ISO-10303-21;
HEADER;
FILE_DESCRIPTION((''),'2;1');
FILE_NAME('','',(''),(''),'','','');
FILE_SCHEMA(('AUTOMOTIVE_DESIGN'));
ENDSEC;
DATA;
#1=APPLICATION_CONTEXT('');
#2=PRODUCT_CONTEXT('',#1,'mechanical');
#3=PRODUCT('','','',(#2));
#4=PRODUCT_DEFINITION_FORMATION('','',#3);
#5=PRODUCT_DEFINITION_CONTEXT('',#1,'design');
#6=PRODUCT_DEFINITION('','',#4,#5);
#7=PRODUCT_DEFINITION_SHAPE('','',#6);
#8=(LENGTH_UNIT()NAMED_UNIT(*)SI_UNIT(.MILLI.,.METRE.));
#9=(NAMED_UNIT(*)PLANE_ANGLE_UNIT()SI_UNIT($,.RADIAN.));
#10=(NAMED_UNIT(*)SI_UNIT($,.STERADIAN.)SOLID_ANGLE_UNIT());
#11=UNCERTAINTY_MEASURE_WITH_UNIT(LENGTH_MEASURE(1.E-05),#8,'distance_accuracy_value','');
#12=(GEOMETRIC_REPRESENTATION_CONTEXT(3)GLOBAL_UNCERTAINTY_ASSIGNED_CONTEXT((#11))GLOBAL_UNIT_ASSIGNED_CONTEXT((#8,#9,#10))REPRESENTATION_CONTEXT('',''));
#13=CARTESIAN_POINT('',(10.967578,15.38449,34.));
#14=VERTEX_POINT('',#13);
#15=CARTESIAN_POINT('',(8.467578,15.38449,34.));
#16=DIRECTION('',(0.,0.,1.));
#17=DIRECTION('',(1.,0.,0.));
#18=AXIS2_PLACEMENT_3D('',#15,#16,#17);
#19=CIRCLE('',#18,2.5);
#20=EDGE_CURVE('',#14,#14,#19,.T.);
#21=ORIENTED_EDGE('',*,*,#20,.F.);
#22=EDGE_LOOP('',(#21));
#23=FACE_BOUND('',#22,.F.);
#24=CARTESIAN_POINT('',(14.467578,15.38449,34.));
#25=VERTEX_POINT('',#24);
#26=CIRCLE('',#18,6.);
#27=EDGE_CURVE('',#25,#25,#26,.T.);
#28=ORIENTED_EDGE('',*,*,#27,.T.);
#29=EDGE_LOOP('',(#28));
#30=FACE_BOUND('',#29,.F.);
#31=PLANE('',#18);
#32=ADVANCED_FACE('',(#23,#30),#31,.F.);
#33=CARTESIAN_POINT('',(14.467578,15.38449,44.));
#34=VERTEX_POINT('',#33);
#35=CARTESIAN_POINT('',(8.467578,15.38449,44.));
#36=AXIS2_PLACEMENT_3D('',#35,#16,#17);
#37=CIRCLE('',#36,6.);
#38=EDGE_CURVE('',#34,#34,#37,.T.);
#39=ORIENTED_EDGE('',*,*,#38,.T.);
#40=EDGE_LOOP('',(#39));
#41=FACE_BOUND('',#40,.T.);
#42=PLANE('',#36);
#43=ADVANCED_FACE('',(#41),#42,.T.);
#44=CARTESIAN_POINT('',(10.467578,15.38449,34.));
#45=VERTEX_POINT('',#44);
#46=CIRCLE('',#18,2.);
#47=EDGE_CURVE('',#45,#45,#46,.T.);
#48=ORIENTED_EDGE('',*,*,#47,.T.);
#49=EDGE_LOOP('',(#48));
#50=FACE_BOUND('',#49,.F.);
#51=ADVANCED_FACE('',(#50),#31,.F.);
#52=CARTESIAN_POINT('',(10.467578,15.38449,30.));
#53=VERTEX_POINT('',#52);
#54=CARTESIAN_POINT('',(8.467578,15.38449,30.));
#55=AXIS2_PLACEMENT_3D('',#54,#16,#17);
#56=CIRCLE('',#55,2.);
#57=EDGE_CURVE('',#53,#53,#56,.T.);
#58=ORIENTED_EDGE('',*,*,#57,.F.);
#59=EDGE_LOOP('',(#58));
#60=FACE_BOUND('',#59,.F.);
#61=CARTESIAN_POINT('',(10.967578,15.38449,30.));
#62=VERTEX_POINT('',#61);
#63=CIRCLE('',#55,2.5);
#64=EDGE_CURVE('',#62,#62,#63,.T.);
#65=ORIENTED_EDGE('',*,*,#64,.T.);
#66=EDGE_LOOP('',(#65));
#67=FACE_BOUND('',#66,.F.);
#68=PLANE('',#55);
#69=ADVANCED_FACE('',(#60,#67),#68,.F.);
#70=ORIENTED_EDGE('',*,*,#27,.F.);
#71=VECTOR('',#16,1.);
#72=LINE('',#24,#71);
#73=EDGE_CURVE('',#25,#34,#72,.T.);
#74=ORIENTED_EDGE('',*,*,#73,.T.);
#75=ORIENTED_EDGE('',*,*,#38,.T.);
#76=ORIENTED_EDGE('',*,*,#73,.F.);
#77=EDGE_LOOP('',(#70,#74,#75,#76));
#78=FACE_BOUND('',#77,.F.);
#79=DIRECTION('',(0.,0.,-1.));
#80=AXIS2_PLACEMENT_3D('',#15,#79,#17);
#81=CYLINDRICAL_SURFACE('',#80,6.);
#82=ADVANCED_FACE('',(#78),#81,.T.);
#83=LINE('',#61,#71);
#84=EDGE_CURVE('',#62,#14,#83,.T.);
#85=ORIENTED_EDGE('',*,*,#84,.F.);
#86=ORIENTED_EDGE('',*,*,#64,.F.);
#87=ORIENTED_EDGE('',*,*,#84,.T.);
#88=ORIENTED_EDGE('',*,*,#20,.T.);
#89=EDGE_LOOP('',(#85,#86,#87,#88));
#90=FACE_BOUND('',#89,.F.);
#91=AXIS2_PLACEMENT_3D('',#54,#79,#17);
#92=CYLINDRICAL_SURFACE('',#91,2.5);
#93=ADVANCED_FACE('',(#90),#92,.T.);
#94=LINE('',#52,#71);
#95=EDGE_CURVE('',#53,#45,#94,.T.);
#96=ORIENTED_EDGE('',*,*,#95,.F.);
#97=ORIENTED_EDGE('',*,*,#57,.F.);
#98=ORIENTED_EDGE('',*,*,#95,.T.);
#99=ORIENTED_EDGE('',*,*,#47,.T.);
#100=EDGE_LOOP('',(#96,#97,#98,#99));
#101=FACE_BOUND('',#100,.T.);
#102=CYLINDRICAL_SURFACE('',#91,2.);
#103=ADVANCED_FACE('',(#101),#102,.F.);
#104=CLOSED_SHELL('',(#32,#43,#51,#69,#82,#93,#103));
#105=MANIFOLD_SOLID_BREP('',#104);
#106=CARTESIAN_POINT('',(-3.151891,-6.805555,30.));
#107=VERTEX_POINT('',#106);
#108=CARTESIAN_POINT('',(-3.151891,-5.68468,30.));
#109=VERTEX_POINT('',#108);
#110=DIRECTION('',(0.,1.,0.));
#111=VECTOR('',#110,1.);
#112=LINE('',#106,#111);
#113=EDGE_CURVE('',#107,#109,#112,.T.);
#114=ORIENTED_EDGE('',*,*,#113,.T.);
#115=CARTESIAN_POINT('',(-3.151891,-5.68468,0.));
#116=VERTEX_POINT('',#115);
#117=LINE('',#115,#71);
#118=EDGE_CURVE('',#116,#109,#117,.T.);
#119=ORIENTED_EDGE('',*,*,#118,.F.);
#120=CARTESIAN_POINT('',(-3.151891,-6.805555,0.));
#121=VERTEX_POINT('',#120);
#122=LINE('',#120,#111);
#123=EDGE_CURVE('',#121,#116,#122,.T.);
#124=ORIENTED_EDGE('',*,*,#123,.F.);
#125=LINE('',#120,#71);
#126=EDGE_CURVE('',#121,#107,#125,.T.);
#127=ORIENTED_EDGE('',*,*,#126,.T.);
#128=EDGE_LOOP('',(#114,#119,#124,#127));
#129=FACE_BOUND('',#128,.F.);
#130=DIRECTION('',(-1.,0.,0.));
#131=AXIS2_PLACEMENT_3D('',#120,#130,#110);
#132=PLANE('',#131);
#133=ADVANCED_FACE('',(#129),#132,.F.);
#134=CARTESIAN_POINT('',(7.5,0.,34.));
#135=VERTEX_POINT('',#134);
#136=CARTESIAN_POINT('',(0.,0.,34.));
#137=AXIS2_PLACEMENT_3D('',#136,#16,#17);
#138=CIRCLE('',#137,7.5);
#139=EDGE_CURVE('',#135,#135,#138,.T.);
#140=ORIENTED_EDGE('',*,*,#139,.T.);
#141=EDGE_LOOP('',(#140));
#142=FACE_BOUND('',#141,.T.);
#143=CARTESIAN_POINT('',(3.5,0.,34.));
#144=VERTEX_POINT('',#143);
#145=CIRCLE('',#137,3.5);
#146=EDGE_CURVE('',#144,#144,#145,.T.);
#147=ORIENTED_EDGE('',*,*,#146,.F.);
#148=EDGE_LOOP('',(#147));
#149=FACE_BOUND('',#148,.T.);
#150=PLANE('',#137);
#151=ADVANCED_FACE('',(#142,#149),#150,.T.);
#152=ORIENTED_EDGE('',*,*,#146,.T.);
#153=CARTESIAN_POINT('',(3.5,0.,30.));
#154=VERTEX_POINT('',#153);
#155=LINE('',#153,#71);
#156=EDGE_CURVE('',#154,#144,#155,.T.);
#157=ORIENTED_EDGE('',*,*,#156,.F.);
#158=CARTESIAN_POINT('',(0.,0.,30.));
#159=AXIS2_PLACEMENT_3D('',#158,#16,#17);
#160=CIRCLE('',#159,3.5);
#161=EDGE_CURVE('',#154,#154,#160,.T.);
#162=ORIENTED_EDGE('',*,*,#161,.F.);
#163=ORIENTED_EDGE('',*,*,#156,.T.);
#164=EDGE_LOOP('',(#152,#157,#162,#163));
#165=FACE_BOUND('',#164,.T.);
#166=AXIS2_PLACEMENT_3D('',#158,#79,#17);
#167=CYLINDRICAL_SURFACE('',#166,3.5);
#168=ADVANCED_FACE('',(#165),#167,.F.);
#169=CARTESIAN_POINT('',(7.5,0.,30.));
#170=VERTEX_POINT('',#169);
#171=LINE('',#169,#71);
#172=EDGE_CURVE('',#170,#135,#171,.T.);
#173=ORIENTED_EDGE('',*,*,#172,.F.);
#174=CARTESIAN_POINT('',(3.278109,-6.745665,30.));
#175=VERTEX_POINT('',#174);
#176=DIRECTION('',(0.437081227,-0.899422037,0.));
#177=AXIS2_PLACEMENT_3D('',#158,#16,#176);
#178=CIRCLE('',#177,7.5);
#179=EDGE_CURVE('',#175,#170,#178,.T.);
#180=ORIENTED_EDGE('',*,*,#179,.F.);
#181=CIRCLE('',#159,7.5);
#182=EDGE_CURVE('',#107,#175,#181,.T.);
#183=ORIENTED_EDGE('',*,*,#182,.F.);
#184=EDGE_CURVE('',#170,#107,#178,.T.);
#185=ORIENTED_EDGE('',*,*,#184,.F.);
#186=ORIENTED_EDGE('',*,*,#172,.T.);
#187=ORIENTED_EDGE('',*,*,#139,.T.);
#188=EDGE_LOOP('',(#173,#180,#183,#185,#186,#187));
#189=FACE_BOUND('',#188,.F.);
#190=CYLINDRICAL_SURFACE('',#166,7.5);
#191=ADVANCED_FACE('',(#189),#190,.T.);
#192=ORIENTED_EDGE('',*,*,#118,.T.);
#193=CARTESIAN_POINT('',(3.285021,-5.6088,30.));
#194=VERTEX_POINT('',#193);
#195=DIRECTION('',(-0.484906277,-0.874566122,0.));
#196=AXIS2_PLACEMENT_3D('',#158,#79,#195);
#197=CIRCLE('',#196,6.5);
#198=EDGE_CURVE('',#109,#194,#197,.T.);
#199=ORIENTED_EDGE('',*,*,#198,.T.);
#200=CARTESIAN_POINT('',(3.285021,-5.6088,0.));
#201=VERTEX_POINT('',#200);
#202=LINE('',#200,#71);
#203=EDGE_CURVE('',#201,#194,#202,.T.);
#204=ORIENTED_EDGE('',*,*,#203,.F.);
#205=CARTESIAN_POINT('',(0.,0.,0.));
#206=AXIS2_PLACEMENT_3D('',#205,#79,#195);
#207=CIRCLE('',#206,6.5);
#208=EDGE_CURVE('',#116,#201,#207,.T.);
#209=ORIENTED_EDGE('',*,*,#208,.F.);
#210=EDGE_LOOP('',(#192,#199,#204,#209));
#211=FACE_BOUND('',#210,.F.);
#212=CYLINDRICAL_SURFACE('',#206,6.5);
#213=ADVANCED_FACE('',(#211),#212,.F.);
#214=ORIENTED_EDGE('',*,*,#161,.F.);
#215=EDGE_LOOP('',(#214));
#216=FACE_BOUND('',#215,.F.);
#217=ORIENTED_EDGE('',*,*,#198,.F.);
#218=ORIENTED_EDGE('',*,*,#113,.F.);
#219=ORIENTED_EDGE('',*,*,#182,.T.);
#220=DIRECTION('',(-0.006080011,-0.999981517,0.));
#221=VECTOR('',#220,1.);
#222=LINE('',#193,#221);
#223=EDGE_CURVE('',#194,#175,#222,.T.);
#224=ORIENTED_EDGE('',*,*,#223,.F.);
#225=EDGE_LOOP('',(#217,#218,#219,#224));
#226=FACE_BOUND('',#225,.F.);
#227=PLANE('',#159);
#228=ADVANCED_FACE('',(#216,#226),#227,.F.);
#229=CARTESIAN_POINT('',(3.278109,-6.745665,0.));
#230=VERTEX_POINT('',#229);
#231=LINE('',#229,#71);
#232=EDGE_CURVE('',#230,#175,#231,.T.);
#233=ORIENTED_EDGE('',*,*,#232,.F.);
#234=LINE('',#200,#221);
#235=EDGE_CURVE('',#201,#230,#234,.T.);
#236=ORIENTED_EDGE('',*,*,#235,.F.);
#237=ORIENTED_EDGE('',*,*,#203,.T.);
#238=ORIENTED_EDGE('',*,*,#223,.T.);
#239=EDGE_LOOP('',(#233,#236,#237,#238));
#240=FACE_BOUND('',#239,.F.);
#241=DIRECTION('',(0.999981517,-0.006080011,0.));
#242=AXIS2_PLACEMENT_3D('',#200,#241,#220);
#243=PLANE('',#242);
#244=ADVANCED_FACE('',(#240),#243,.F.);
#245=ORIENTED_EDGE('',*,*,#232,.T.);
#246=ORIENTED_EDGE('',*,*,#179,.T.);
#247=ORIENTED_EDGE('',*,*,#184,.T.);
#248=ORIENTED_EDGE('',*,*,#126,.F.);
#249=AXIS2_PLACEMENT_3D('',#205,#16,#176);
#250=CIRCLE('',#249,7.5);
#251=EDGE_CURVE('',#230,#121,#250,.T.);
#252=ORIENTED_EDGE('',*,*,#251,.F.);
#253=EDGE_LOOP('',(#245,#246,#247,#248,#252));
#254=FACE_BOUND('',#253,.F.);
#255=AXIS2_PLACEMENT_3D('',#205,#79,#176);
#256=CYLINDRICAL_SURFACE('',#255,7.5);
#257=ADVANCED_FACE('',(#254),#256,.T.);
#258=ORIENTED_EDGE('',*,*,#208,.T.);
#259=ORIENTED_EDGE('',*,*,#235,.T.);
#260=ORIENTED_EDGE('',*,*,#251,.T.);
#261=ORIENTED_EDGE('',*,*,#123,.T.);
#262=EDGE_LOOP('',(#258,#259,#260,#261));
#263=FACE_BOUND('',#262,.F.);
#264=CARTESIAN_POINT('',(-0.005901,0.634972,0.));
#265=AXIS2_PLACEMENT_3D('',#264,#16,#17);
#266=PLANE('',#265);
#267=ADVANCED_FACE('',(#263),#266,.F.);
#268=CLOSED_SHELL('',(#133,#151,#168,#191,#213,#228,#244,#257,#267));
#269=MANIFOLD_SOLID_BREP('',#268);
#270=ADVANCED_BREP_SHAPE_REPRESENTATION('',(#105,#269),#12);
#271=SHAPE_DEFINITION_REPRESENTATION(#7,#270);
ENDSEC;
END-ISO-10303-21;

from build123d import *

# Parameters (mm, degrees)
F1_DEPTH = 30
F3_R     = 7.5
F3_R_2   = 3.5
F4_DEPTH = 4
F5_R     = 2.5
F5_R_2   = 2
F6_DEPTH = 4
F7_R     = 6
F8_DEPTH = 10


# Not quite as in the source:
# - a feature names something its author has since deleted; it is built from what else it names


with BuildPart() as f1:
    # F0 (on Top) → F1 (new body)
    with BuildSketch(Plane.XY):
        with BuildLine():
            Line((3.2850214823, -5.6087996809), (3.2781091996, -6.7456652804))
            ThreePointArc((3.2781091996, -6.7456652804), (-0.0698532595, 7.4996746944), (-3.1518908004, -6.8055554059))
            Line((-3.1518908004, -6.8055554059), (-3.1518908004, -5.684679796))
            ThreePointArc((-3.1518908004, -5.684679796), (-0.0766184872, 6.4995484157), (3.2850214823, -5.6087996809))
        make_face()
    extrude(amount=F1_DEPTH)

    # F3 (on offset) → F4 (join)
    with BuildSketch(Plane.XY.offset(30)):
        Circle(F3_R)
        Circle(F3_R_2, mode=Mode.SUBTRACT)
    extrude(amount=F4_DEPTH)


with BuildPart() as f6:
    # F5 (on offset) → F6 (new body)
    with BuildSketch(Plane.XY.offset(30)):
        with Locations((8.4675775911, 15.3844900672)):
            Circle(F5_R)
        with Locations((8.4675775911, 15.3844900672)):
            Circle(F5_R_2, mode=Mode.SUBTRACT)
    extrude(amount=F6_DEPTH)

    # F7 (on face) → F8 (join)
    with BuildSketch(Plane.XY.offset(34)):
        with Locations((8.4675775911, 15.3844900672)):
            Circle(F7_R)
    extrude(amount=F8_DEPTH)


solid = Compound([f1.part, f6.part])
